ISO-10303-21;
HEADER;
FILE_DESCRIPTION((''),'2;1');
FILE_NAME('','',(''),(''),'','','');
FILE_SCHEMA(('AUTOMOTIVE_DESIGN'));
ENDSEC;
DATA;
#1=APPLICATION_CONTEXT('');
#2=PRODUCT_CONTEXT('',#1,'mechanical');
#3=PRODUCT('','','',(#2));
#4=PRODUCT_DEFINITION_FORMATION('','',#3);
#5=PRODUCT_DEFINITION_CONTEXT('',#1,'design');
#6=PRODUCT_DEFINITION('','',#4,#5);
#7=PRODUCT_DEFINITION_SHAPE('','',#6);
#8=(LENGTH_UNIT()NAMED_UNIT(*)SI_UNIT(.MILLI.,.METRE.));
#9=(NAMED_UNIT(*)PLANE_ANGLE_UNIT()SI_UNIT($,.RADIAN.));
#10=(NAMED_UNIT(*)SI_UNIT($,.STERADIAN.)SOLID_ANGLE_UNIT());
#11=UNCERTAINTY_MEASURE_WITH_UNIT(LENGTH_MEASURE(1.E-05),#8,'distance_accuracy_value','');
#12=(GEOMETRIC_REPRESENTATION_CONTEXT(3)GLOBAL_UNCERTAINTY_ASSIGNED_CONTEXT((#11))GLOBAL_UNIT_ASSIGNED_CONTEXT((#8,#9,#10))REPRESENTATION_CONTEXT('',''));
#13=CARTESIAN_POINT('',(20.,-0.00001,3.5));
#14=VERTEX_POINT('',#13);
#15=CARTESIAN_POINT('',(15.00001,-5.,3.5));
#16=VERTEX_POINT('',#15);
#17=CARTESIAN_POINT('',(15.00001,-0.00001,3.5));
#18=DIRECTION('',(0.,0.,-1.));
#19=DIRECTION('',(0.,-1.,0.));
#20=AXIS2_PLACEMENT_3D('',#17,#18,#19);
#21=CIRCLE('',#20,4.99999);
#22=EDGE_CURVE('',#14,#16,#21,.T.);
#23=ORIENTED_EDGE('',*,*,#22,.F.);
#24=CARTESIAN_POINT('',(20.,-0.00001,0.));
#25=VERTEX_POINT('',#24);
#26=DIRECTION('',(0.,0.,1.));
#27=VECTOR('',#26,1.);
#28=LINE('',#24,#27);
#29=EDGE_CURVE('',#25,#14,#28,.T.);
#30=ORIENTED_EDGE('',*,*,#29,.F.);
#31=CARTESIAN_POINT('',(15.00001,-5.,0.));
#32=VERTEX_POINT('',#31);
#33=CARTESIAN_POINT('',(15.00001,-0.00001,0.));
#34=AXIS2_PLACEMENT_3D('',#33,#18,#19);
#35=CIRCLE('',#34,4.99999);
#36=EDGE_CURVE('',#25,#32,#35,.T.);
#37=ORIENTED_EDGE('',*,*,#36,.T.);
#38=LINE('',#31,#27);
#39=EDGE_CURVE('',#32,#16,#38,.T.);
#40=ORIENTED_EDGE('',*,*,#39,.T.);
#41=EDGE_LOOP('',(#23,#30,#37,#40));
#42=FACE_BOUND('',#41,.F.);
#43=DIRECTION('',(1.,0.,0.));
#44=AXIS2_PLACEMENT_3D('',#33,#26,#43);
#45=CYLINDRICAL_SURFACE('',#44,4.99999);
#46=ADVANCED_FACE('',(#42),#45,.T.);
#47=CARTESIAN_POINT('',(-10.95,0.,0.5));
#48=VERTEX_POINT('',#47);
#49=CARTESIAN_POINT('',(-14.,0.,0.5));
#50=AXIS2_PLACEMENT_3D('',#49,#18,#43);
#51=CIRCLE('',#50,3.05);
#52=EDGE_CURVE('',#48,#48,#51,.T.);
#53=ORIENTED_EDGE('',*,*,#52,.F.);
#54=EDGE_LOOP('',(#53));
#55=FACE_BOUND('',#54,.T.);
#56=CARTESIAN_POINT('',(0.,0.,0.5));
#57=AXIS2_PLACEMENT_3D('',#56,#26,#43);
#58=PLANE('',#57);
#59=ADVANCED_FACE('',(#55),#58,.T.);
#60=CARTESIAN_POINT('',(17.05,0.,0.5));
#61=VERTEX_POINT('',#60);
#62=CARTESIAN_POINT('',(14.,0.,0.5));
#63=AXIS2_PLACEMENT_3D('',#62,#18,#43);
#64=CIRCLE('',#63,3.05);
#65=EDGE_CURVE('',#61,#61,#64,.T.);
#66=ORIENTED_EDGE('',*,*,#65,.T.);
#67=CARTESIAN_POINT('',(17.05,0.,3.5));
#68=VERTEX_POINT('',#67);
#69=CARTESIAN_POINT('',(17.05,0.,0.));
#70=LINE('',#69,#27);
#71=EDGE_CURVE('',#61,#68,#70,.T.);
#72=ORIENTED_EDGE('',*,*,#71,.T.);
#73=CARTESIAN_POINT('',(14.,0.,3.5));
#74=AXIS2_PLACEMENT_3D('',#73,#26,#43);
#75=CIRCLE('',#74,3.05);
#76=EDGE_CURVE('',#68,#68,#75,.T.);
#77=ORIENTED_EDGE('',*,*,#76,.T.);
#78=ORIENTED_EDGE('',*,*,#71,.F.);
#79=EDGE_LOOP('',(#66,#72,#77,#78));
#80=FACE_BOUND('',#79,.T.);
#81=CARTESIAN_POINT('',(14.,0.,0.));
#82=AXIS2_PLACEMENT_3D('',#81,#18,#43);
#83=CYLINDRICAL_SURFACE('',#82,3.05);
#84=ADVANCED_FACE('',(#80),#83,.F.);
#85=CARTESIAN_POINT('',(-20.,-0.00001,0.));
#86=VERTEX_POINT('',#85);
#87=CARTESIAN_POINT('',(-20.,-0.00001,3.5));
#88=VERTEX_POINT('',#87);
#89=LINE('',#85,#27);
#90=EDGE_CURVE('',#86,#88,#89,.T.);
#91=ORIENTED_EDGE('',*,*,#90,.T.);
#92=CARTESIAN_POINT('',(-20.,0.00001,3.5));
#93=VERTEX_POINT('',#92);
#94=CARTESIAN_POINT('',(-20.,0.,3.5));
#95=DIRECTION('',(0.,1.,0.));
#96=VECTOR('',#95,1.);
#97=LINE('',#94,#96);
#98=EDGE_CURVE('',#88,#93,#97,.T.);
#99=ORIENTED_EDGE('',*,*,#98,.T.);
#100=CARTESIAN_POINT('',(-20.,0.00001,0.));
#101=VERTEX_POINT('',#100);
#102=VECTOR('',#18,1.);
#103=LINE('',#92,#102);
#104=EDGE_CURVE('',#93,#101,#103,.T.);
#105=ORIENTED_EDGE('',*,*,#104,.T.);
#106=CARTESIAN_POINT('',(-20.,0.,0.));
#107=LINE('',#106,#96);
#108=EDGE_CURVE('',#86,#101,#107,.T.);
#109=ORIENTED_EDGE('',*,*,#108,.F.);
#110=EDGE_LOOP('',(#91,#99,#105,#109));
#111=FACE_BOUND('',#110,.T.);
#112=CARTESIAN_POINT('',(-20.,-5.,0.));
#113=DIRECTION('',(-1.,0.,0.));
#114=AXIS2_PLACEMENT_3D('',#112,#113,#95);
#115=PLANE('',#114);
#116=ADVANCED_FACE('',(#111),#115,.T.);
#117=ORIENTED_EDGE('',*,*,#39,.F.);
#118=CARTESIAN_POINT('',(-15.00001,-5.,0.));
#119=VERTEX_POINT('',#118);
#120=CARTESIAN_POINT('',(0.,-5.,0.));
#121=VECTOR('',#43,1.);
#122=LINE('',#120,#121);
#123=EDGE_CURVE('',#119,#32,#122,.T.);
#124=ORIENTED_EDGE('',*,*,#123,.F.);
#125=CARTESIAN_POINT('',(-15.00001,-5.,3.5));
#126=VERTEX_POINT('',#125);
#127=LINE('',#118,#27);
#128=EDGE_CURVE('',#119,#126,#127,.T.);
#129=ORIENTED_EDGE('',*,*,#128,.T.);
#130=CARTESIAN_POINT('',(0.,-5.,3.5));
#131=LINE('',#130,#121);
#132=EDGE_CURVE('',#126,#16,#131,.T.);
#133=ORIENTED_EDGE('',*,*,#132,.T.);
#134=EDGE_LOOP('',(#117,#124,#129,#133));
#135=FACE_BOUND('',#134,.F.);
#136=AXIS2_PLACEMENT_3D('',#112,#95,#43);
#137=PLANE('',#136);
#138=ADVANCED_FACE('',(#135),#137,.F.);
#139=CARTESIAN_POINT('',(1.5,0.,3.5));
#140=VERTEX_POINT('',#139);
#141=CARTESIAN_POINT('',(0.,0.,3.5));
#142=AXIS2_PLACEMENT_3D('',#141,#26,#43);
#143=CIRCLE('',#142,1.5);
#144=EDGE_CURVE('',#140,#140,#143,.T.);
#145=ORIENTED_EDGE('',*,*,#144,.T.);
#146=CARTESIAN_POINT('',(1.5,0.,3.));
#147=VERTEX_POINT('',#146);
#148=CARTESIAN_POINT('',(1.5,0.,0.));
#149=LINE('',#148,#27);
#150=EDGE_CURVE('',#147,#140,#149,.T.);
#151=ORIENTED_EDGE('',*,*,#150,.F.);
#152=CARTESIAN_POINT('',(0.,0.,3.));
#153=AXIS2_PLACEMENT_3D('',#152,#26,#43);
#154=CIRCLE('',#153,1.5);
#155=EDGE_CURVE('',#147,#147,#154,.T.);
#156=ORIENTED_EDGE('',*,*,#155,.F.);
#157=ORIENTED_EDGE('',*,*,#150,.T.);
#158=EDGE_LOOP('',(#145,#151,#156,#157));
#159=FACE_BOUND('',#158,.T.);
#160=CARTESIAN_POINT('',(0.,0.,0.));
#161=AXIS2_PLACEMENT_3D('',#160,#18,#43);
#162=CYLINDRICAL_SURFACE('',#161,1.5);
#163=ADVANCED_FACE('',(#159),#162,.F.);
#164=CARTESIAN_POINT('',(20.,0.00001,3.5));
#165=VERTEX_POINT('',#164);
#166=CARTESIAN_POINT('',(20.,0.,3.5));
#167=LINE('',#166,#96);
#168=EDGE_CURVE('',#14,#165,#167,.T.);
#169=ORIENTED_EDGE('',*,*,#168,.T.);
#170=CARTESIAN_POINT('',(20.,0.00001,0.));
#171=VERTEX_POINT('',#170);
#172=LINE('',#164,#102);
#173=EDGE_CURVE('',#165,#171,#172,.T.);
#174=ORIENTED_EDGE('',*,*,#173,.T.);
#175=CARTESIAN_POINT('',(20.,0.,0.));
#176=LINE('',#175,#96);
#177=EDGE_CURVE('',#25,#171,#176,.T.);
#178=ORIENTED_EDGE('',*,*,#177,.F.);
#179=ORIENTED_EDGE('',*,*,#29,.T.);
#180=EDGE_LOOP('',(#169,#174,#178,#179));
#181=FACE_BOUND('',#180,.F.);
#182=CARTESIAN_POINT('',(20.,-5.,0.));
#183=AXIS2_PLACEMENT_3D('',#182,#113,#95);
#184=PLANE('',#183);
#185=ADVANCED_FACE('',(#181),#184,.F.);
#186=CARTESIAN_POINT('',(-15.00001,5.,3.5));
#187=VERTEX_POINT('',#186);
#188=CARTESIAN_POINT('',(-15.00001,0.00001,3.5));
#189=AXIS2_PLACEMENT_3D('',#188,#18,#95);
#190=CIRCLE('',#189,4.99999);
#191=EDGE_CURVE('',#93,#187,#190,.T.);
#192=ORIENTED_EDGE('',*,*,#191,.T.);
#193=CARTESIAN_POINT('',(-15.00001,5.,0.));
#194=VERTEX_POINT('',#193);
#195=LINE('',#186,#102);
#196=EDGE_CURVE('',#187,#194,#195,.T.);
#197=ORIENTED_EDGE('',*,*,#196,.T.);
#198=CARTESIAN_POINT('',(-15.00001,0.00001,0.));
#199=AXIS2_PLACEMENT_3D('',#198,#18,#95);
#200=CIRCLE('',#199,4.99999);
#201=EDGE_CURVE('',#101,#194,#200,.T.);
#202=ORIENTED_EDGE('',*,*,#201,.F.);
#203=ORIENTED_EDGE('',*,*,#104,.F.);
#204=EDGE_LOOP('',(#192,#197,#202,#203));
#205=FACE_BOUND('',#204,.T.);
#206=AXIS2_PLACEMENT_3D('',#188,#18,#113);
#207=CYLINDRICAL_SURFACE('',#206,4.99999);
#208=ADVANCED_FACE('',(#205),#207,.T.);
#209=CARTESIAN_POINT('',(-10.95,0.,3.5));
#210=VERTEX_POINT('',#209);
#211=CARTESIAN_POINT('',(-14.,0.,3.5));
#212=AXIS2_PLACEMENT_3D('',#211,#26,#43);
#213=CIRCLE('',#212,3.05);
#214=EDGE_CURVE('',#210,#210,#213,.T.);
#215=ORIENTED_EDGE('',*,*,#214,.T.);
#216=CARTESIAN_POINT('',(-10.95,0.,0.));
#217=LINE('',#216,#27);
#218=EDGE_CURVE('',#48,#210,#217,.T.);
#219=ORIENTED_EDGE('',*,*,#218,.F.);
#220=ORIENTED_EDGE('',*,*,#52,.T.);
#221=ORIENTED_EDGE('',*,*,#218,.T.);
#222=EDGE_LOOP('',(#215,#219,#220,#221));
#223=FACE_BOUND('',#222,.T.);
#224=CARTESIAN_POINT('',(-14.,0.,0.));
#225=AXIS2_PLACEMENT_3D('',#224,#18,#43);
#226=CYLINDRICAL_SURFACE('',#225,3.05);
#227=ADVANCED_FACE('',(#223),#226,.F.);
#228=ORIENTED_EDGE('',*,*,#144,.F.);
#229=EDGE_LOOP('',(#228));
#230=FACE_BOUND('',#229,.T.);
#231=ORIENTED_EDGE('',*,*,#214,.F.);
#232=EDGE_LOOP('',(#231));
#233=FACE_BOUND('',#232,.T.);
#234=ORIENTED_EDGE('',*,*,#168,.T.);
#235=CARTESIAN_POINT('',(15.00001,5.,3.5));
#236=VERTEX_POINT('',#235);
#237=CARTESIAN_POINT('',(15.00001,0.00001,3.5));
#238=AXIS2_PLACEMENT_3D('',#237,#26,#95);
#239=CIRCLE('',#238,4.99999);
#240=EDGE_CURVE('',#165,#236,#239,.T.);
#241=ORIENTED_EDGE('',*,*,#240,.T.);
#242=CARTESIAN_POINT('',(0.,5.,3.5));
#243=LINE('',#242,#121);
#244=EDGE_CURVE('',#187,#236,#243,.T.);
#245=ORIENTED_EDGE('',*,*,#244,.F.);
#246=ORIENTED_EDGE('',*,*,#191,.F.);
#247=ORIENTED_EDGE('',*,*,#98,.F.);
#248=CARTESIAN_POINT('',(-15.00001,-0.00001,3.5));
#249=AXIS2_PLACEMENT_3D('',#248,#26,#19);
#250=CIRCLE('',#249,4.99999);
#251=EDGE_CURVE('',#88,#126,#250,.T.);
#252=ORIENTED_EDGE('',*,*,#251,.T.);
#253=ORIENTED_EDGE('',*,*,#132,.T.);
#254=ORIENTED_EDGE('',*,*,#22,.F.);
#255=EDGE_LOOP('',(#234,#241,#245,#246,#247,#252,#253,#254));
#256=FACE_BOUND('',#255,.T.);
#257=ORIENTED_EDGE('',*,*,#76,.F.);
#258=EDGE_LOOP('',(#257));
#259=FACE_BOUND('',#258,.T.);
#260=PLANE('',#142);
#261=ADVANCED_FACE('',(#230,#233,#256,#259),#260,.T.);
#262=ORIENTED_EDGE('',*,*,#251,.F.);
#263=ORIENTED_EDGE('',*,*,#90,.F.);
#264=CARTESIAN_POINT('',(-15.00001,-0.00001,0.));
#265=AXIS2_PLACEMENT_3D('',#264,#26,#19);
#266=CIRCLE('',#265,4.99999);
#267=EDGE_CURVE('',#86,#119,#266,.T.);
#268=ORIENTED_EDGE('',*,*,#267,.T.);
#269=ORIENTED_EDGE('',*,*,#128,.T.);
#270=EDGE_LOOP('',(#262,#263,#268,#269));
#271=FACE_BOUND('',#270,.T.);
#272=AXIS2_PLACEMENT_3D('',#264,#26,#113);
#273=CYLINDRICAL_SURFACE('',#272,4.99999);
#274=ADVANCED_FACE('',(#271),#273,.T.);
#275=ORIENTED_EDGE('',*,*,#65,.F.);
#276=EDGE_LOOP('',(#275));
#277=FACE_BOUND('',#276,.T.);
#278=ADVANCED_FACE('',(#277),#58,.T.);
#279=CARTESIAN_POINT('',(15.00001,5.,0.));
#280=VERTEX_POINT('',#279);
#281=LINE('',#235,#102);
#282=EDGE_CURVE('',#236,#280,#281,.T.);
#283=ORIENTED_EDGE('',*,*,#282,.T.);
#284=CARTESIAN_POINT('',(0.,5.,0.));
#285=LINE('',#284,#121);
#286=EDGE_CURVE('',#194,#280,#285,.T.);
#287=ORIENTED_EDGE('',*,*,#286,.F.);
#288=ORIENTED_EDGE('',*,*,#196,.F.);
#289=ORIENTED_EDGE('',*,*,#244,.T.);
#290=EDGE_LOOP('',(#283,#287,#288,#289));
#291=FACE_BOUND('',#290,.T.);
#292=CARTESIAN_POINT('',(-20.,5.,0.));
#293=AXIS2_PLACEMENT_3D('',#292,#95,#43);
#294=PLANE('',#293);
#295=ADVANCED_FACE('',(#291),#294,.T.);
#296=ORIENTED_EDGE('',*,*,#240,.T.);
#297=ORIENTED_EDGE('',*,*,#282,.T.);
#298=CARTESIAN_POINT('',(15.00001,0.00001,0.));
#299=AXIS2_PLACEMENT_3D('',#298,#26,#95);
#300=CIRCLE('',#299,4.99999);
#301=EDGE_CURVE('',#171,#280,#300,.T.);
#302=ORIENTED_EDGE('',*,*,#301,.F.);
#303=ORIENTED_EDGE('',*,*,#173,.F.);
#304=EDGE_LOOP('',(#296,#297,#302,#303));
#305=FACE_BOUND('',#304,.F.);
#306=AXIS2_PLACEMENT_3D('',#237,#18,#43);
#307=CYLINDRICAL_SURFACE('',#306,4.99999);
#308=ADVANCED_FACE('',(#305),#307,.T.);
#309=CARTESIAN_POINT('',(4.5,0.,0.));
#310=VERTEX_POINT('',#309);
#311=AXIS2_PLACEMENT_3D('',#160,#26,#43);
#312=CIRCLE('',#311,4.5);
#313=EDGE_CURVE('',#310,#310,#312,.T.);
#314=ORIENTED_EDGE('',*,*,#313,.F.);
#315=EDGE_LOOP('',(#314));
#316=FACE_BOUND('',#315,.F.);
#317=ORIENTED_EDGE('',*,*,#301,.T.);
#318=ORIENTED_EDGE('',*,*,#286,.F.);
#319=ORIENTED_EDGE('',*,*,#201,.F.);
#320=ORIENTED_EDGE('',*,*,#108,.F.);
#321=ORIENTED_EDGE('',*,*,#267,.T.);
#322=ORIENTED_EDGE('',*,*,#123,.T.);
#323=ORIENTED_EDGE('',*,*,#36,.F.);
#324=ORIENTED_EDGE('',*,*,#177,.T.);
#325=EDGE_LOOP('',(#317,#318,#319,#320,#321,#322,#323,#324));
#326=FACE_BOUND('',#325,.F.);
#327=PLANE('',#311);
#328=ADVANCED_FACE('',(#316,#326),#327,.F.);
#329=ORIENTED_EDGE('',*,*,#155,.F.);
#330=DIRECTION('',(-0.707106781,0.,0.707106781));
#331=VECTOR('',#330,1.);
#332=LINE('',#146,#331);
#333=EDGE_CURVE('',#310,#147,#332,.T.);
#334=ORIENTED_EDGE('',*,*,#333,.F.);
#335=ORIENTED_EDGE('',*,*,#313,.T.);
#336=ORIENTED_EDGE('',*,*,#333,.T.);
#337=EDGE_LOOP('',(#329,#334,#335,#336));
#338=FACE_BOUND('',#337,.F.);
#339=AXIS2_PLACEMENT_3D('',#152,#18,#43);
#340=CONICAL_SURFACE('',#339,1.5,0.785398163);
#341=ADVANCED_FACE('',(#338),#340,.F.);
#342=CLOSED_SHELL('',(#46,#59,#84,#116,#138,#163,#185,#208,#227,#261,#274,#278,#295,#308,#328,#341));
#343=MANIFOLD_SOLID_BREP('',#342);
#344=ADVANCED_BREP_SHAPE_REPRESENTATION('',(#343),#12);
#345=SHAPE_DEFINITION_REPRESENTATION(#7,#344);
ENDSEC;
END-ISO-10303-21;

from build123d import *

# Parameters (mm, degrees)
F0_W     = 40
F0_H     = 10
F0_R     = 3.05
F0_R_2   = 1.5
F1_DEPTH = 0.5
F2_DEPTH = 3.5
F3_R     = 4.99999
F4_SIZE  = 3


# Not quite as in the source:
# - a fillet or chamfer is up to 0.001 mm smaller than in the source, because OpenCascade refuses the exact size


with BuildPart() as f1:
    # F0 (on Top) → F1 (new body)
    with BuildSketch(Plane.XY):
        Rectangle(F0_W, F0_H)
        with Locations((-14, 0)):
            Circle(F0_R, mode=Mode.SUBTRACT)
        Circle(F0_R_2, mode=Mode.SUBTRACT)
        with Locations((14, 0)):
            Circle(F0_R, mode=Mode.SUBTRACT)
        with Locations((-14, 0)):
            Circle(F0_R)
        with Locations((14, 0)):
            Circle(F0_R)
    extrude(amount=F1_DEPTH)

    # F0 (on Top) → F2 (join)
    with BuildSketch(Plane.XY):
        Rectangle(F0_W, F0_H)
        with Locations((-14, 0)):
            Circle(F0_R, mode=Mode.SUBTRACT)
        Circle(F0_R_2, mode=Mode.SUBTRACT)
        with Locations((14, 0)):
            Circle(F0_R, mode=Mode.SUBTRACT)
    extrude(amount=F2_DEPTH)

    # F3 (radius 5 in the source; OpenCascade refuses exactly that, so slightly less here)
    f3_edges = [f1.edges().sort_by_distance(p)[0] for p in [
        (20, 5, 1.75),
        (20, -5, 1.75),
        (-20, -5, 1.75),
        (-20, 5, 1.75),
    ]]
    fillet(f3_edges, radius=F3_R)

    # F4
    f4_edges = [f1.edges().sort_by_distance(p)[0] for p in [
        (-1.5, 0, 0),
    ]]
    chamfer(f4_edges, length=F4_SIZE)


solid = f1.part
